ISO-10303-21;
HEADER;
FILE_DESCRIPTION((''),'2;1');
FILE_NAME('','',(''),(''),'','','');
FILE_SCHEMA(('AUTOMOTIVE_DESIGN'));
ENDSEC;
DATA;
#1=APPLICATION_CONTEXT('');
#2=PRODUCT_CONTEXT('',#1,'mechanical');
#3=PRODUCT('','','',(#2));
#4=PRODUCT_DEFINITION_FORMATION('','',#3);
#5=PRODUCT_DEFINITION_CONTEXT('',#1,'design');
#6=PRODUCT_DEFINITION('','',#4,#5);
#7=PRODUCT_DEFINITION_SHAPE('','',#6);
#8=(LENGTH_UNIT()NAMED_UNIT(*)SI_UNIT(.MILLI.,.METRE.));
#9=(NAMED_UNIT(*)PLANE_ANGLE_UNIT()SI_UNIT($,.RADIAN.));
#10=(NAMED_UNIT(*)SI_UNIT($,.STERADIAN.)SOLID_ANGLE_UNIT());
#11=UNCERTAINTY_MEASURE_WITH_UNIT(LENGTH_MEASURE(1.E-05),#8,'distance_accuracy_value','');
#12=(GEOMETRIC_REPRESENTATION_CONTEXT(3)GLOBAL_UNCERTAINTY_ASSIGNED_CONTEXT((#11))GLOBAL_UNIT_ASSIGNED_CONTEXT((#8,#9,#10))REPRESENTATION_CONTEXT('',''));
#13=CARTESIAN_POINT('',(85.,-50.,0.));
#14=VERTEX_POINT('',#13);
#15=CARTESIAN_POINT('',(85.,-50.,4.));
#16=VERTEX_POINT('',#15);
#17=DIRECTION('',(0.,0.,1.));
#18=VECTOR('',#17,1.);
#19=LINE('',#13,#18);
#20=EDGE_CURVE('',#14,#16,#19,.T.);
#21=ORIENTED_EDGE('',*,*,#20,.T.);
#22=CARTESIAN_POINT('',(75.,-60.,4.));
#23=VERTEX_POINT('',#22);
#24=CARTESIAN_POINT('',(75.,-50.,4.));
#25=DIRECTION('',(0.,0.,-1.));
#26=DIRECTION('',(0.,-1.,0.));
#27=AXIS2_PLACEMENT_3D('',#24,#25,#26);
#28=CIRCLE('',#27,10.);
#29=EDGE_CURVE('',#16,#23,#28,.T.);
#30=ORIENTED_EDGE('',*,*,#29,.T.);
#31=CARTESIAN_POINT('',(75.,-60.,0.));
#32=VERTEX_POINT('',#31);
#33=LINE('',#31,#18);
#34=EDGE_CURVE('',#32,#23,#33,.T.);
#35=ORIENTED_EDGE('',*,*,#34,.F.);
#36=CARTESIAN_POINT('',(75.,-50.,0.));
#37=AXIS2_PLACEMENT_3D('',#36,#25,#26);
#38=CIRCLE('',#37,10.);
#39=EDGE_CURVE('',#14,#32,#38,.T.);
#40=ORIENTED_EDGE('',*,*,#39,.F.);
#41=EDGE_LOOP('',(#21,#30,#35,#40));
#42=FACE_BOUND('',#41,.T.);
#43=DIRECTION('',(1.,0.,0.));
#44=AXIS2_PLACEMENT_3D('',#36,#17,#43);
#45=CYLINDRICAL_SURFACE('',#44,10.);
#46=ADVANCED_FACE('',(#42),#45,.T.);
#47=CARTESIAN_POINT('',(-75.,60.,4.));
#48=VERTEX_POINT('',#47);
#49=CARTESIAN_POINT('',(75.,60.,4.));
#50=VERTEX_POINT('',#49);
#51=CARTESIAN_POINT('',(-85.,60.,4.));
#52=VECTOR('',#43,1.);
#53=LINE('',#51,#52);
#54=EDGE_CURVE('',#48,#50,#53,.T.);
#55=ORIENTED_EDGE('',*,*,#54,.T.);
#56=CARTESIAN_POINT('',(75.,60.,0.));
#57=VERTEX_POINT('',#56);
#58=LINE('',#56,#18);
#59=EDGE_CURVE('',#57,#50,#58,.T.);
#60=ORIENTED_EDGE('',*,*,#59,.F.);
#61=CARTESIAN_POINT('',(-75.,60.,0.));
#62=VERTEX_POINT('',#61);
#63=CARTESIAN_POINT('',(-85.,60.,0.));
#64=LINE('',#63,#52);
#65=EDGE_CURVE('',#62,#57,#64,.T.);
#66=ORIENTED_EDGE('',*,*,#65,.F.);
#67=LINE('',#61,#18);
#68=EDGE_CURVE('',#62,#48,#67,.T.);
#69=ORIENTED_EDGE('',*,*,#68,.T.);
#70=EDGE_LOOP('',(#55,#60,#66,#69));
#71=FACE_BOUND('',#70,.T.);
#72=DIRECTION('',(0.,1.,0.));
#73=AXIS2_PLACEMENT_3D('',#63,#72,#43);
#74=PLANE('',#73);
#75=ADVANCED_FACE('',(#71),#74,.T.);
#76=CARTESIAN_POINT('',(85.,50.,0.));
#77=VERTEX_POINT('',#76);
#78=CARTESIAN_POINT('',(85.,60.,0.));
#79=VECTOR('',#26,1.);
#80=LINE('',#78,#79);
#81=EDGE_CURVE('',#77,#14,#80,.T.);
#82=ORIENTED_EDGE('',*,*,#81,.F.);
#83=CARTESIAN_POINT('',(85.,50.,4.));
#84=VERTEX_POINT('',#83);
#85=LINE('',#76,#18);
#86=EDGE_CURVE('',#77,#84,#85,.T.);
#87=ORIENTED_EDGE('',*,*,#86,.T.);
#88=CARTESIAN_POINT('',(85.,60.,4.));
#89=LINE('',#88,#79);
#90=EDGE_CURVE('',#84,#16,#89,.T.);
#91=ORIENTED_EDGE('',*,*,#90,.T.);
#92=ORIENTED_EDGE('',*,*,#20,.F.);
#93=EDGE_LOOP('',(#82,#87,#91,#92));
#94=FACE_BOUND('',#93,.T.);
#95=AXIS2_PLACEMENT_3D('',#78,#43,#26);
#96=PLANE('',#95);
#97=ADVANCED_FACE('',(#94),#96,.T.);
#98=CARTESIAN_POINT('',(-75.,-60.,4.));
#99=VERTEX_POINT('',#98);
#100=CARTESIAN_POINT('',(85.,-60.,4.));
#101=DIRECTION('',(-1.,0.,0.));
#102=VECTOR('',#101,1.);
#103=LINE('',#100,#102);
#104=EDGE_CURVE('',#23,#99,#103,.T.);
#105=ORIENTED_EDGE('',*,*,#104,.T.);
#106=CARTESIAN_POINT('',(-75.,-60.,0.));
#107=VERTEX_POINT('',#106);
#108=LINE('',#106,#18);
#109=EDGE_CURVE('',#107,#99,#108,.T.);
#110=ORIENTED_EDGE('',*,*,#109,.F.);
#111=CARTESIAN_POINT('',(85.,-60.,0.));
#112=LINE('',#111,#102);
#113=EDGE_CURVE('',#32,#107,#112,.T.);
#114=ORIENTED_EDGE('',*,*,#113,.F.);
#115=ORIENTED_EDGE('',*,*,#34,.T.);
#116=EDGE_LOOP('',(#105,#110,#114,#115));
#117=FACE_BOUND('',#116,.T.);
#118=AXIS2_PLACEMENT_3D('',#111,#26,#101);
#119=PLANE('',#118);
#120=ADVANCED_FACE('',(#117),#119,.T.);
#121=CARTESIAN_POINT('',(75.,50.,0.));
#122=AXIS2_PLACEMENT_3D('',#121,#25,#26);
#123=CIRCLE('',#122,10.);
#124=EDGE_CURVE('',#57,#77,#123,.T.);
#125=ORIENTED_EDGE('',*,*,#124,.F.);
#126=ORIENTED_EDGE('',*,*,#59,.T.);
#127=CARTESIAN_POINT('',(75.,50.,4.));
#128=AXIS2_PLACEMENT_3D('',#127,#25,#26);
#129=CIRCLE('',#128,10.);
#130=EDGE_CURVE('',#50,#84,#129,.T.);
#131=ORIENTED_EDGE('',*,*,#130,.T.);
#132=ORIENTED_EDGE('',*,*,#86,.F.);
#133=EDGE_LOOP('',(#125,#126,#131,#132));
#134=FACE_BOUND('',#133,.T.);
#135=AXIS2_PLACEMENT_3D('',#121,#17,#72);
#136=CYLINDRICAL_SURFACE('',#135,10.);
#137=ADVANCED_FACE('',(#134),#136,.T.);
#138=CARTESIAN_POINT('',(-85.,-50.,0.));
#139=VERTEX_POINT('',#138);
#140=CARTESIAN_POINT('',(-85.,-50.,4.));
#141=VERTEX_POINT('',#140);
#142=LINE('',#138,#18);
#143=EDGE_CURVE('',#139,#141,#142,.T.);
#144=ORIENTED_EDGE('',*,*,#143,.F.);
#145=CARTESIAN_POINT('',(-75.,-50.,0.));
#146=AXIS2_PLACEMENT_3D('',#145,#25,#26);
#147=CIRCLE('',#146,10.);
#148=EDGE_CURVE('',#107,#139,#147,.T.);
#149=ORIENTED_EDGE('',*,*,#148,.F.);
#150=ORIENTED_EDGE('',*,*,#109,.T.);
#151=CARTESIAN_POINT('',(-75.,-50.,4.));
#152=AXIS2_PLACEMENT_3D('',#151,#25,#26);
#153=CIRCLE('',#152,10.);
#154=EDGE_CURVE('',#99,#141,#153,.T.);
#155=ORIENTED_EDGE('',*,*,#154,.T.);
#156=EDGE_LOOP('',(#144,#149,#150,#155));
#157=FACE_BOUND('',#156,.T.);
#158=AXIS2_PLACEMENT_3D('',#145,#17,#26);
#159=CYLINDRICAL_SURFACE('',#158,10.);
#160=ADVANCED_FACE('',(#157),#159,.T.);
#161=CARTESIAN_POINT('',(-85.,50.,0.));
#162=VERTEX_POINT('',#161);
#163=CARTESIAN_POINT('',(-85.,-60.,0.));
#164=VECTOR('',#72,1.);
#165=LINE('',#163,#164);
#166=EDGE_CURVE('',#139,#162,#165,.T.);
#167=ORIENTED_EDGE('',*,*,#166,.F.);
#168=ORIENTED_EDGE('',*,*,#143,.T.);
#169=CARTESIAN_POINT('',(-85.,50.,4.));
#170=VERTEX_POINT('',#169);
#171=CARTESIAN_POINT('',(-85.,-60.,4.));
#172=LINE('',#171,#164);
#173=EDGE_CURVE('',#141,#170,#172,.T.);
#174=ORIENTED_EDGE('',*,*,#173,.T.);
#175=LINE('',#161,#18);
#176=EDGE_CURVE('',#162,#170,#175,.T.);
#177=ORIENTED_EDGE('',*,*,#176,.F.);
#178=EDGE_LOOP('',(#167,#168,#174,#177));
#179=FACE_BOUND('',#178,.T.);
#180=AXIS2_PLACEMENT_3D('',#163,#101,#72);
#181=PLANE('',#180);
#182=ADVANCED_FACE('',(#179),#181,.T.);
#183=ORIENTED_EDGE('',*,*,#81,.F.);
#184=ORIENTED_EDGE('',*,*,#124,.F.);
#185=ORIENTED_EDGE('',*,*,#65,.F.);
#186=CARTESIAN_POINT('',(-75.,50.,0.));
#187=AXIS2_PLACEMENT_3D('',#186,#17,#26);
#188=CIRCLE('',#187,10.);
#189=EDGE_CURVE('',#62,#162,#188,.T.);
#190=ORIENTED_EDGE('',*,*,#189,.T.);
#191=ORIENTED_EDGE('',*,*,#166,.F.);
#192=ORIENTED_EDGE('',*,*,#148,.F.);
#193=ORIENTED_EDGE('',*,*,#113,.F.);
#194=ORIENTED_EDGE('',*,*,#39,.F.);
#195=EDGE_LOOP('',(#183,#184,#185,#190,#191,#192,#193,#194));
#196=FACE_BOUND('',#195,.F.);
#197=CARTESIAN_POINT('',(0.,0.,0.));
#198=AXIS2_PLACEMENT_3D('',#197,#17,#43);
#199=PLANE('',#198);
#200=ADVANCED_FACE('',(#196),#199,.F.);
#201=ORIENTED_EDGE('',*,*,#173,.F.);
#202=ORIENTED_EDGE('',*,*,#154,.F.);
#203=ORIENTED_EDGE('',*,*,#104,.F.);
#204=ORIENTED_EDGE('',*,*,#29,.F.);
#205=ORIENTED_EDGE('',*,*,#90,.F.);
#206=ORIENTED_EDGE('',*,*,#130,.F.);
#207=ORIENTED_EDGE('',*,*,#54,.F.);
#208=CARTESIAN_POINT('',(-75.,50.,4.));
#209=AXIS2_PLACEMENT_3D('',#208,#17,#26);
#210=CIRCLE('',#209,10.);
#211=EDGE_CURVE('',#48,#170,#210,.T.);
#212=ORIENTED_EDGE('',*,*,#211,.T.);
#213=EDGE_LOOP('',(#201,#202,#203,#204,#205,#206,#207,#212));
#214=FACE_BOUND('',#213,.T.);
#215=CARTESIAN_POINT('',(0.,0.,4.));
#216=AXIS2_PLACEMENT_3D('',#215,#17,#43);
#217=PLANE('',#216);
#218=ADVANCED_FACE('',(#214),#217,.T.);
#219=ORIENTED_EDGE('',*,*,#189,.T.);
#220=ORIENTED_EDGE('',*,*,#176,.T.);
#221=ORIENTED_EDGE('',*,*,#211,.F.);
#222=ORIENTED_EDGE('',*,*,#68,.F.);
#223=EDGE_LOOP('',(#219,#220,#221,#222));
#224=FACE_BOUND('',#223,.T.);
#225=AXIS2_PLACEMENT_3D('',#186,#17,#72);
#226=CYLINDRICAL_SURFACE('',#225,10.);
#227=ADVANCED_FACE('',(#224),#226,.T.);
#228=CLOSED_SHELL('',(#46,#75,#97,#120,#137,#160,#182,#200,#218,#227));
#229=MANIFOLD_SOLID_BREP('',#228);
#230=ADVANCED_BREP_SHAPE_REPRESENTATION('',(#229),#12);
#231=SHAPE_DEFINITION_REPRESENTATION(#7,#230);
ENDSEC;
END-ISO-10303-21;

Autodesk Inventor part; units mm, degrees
ref_plane "YZ Plane" through (0, 0, 0) normal (1, 0, 0) x (0, 1, 0)
ref_plane "XZ Plane" through (0, 0, 0) normal (0, 1, 0) x (-1, 0, 0)
ref_plane "XY Plane" through (0, 0, 0) normal (0, 0, 1) x (1, 0, 0)
sketch "Sketch1" plane through (0, 0, 0) normal (0, 0, 1) x (1, 0, 0)
  line L0 (-85, 60) -> (85, 60)
  line L1 (85, 60) -> (85, -60)
  line L2 (85, -60) -> (-85, -60)
  line L3 (-85, -60) -> (-85, 60)
  line L4 (-85, 60) -> (85, -60) construction
  line L5 (85, 60) -> (-85, -60) construction
  line L6 (0, 60) -> (0, -60) construction
  point P0 (0, 0)
  dimension "d0" = 170
  dimension "d1" = 120
extrude "Plate1" add sketch "Sketch1" along normal blind 4
fillet "Corner Round1" radius 10 4 edges at (85, -60, 2) (85, 60, 2) (-85, -60, 2) (-85, 60, 2)
equation "\"d2\" = Thickness"
equation "\"BendRadius\" = Thickness"
equation "\"BendReliefWidth\" = Thickness"
equation "\"BendReliefDepth\" = 0.5 * Thickness"
equation "\"CornerReliefSize\" = 4 * Thickness"
equation "\"MinimumRemnant\" = 2 * Thickness"
equation "\"TransitionRadius\" = BendRadius"
equation "\"JacobiRadiusSize\" = BendRadius"
equation "\"GapSize\" = Thickness"
equation "\"Thickness\" = 4"
properties part number "GBK-RK-0820 ring plate"
